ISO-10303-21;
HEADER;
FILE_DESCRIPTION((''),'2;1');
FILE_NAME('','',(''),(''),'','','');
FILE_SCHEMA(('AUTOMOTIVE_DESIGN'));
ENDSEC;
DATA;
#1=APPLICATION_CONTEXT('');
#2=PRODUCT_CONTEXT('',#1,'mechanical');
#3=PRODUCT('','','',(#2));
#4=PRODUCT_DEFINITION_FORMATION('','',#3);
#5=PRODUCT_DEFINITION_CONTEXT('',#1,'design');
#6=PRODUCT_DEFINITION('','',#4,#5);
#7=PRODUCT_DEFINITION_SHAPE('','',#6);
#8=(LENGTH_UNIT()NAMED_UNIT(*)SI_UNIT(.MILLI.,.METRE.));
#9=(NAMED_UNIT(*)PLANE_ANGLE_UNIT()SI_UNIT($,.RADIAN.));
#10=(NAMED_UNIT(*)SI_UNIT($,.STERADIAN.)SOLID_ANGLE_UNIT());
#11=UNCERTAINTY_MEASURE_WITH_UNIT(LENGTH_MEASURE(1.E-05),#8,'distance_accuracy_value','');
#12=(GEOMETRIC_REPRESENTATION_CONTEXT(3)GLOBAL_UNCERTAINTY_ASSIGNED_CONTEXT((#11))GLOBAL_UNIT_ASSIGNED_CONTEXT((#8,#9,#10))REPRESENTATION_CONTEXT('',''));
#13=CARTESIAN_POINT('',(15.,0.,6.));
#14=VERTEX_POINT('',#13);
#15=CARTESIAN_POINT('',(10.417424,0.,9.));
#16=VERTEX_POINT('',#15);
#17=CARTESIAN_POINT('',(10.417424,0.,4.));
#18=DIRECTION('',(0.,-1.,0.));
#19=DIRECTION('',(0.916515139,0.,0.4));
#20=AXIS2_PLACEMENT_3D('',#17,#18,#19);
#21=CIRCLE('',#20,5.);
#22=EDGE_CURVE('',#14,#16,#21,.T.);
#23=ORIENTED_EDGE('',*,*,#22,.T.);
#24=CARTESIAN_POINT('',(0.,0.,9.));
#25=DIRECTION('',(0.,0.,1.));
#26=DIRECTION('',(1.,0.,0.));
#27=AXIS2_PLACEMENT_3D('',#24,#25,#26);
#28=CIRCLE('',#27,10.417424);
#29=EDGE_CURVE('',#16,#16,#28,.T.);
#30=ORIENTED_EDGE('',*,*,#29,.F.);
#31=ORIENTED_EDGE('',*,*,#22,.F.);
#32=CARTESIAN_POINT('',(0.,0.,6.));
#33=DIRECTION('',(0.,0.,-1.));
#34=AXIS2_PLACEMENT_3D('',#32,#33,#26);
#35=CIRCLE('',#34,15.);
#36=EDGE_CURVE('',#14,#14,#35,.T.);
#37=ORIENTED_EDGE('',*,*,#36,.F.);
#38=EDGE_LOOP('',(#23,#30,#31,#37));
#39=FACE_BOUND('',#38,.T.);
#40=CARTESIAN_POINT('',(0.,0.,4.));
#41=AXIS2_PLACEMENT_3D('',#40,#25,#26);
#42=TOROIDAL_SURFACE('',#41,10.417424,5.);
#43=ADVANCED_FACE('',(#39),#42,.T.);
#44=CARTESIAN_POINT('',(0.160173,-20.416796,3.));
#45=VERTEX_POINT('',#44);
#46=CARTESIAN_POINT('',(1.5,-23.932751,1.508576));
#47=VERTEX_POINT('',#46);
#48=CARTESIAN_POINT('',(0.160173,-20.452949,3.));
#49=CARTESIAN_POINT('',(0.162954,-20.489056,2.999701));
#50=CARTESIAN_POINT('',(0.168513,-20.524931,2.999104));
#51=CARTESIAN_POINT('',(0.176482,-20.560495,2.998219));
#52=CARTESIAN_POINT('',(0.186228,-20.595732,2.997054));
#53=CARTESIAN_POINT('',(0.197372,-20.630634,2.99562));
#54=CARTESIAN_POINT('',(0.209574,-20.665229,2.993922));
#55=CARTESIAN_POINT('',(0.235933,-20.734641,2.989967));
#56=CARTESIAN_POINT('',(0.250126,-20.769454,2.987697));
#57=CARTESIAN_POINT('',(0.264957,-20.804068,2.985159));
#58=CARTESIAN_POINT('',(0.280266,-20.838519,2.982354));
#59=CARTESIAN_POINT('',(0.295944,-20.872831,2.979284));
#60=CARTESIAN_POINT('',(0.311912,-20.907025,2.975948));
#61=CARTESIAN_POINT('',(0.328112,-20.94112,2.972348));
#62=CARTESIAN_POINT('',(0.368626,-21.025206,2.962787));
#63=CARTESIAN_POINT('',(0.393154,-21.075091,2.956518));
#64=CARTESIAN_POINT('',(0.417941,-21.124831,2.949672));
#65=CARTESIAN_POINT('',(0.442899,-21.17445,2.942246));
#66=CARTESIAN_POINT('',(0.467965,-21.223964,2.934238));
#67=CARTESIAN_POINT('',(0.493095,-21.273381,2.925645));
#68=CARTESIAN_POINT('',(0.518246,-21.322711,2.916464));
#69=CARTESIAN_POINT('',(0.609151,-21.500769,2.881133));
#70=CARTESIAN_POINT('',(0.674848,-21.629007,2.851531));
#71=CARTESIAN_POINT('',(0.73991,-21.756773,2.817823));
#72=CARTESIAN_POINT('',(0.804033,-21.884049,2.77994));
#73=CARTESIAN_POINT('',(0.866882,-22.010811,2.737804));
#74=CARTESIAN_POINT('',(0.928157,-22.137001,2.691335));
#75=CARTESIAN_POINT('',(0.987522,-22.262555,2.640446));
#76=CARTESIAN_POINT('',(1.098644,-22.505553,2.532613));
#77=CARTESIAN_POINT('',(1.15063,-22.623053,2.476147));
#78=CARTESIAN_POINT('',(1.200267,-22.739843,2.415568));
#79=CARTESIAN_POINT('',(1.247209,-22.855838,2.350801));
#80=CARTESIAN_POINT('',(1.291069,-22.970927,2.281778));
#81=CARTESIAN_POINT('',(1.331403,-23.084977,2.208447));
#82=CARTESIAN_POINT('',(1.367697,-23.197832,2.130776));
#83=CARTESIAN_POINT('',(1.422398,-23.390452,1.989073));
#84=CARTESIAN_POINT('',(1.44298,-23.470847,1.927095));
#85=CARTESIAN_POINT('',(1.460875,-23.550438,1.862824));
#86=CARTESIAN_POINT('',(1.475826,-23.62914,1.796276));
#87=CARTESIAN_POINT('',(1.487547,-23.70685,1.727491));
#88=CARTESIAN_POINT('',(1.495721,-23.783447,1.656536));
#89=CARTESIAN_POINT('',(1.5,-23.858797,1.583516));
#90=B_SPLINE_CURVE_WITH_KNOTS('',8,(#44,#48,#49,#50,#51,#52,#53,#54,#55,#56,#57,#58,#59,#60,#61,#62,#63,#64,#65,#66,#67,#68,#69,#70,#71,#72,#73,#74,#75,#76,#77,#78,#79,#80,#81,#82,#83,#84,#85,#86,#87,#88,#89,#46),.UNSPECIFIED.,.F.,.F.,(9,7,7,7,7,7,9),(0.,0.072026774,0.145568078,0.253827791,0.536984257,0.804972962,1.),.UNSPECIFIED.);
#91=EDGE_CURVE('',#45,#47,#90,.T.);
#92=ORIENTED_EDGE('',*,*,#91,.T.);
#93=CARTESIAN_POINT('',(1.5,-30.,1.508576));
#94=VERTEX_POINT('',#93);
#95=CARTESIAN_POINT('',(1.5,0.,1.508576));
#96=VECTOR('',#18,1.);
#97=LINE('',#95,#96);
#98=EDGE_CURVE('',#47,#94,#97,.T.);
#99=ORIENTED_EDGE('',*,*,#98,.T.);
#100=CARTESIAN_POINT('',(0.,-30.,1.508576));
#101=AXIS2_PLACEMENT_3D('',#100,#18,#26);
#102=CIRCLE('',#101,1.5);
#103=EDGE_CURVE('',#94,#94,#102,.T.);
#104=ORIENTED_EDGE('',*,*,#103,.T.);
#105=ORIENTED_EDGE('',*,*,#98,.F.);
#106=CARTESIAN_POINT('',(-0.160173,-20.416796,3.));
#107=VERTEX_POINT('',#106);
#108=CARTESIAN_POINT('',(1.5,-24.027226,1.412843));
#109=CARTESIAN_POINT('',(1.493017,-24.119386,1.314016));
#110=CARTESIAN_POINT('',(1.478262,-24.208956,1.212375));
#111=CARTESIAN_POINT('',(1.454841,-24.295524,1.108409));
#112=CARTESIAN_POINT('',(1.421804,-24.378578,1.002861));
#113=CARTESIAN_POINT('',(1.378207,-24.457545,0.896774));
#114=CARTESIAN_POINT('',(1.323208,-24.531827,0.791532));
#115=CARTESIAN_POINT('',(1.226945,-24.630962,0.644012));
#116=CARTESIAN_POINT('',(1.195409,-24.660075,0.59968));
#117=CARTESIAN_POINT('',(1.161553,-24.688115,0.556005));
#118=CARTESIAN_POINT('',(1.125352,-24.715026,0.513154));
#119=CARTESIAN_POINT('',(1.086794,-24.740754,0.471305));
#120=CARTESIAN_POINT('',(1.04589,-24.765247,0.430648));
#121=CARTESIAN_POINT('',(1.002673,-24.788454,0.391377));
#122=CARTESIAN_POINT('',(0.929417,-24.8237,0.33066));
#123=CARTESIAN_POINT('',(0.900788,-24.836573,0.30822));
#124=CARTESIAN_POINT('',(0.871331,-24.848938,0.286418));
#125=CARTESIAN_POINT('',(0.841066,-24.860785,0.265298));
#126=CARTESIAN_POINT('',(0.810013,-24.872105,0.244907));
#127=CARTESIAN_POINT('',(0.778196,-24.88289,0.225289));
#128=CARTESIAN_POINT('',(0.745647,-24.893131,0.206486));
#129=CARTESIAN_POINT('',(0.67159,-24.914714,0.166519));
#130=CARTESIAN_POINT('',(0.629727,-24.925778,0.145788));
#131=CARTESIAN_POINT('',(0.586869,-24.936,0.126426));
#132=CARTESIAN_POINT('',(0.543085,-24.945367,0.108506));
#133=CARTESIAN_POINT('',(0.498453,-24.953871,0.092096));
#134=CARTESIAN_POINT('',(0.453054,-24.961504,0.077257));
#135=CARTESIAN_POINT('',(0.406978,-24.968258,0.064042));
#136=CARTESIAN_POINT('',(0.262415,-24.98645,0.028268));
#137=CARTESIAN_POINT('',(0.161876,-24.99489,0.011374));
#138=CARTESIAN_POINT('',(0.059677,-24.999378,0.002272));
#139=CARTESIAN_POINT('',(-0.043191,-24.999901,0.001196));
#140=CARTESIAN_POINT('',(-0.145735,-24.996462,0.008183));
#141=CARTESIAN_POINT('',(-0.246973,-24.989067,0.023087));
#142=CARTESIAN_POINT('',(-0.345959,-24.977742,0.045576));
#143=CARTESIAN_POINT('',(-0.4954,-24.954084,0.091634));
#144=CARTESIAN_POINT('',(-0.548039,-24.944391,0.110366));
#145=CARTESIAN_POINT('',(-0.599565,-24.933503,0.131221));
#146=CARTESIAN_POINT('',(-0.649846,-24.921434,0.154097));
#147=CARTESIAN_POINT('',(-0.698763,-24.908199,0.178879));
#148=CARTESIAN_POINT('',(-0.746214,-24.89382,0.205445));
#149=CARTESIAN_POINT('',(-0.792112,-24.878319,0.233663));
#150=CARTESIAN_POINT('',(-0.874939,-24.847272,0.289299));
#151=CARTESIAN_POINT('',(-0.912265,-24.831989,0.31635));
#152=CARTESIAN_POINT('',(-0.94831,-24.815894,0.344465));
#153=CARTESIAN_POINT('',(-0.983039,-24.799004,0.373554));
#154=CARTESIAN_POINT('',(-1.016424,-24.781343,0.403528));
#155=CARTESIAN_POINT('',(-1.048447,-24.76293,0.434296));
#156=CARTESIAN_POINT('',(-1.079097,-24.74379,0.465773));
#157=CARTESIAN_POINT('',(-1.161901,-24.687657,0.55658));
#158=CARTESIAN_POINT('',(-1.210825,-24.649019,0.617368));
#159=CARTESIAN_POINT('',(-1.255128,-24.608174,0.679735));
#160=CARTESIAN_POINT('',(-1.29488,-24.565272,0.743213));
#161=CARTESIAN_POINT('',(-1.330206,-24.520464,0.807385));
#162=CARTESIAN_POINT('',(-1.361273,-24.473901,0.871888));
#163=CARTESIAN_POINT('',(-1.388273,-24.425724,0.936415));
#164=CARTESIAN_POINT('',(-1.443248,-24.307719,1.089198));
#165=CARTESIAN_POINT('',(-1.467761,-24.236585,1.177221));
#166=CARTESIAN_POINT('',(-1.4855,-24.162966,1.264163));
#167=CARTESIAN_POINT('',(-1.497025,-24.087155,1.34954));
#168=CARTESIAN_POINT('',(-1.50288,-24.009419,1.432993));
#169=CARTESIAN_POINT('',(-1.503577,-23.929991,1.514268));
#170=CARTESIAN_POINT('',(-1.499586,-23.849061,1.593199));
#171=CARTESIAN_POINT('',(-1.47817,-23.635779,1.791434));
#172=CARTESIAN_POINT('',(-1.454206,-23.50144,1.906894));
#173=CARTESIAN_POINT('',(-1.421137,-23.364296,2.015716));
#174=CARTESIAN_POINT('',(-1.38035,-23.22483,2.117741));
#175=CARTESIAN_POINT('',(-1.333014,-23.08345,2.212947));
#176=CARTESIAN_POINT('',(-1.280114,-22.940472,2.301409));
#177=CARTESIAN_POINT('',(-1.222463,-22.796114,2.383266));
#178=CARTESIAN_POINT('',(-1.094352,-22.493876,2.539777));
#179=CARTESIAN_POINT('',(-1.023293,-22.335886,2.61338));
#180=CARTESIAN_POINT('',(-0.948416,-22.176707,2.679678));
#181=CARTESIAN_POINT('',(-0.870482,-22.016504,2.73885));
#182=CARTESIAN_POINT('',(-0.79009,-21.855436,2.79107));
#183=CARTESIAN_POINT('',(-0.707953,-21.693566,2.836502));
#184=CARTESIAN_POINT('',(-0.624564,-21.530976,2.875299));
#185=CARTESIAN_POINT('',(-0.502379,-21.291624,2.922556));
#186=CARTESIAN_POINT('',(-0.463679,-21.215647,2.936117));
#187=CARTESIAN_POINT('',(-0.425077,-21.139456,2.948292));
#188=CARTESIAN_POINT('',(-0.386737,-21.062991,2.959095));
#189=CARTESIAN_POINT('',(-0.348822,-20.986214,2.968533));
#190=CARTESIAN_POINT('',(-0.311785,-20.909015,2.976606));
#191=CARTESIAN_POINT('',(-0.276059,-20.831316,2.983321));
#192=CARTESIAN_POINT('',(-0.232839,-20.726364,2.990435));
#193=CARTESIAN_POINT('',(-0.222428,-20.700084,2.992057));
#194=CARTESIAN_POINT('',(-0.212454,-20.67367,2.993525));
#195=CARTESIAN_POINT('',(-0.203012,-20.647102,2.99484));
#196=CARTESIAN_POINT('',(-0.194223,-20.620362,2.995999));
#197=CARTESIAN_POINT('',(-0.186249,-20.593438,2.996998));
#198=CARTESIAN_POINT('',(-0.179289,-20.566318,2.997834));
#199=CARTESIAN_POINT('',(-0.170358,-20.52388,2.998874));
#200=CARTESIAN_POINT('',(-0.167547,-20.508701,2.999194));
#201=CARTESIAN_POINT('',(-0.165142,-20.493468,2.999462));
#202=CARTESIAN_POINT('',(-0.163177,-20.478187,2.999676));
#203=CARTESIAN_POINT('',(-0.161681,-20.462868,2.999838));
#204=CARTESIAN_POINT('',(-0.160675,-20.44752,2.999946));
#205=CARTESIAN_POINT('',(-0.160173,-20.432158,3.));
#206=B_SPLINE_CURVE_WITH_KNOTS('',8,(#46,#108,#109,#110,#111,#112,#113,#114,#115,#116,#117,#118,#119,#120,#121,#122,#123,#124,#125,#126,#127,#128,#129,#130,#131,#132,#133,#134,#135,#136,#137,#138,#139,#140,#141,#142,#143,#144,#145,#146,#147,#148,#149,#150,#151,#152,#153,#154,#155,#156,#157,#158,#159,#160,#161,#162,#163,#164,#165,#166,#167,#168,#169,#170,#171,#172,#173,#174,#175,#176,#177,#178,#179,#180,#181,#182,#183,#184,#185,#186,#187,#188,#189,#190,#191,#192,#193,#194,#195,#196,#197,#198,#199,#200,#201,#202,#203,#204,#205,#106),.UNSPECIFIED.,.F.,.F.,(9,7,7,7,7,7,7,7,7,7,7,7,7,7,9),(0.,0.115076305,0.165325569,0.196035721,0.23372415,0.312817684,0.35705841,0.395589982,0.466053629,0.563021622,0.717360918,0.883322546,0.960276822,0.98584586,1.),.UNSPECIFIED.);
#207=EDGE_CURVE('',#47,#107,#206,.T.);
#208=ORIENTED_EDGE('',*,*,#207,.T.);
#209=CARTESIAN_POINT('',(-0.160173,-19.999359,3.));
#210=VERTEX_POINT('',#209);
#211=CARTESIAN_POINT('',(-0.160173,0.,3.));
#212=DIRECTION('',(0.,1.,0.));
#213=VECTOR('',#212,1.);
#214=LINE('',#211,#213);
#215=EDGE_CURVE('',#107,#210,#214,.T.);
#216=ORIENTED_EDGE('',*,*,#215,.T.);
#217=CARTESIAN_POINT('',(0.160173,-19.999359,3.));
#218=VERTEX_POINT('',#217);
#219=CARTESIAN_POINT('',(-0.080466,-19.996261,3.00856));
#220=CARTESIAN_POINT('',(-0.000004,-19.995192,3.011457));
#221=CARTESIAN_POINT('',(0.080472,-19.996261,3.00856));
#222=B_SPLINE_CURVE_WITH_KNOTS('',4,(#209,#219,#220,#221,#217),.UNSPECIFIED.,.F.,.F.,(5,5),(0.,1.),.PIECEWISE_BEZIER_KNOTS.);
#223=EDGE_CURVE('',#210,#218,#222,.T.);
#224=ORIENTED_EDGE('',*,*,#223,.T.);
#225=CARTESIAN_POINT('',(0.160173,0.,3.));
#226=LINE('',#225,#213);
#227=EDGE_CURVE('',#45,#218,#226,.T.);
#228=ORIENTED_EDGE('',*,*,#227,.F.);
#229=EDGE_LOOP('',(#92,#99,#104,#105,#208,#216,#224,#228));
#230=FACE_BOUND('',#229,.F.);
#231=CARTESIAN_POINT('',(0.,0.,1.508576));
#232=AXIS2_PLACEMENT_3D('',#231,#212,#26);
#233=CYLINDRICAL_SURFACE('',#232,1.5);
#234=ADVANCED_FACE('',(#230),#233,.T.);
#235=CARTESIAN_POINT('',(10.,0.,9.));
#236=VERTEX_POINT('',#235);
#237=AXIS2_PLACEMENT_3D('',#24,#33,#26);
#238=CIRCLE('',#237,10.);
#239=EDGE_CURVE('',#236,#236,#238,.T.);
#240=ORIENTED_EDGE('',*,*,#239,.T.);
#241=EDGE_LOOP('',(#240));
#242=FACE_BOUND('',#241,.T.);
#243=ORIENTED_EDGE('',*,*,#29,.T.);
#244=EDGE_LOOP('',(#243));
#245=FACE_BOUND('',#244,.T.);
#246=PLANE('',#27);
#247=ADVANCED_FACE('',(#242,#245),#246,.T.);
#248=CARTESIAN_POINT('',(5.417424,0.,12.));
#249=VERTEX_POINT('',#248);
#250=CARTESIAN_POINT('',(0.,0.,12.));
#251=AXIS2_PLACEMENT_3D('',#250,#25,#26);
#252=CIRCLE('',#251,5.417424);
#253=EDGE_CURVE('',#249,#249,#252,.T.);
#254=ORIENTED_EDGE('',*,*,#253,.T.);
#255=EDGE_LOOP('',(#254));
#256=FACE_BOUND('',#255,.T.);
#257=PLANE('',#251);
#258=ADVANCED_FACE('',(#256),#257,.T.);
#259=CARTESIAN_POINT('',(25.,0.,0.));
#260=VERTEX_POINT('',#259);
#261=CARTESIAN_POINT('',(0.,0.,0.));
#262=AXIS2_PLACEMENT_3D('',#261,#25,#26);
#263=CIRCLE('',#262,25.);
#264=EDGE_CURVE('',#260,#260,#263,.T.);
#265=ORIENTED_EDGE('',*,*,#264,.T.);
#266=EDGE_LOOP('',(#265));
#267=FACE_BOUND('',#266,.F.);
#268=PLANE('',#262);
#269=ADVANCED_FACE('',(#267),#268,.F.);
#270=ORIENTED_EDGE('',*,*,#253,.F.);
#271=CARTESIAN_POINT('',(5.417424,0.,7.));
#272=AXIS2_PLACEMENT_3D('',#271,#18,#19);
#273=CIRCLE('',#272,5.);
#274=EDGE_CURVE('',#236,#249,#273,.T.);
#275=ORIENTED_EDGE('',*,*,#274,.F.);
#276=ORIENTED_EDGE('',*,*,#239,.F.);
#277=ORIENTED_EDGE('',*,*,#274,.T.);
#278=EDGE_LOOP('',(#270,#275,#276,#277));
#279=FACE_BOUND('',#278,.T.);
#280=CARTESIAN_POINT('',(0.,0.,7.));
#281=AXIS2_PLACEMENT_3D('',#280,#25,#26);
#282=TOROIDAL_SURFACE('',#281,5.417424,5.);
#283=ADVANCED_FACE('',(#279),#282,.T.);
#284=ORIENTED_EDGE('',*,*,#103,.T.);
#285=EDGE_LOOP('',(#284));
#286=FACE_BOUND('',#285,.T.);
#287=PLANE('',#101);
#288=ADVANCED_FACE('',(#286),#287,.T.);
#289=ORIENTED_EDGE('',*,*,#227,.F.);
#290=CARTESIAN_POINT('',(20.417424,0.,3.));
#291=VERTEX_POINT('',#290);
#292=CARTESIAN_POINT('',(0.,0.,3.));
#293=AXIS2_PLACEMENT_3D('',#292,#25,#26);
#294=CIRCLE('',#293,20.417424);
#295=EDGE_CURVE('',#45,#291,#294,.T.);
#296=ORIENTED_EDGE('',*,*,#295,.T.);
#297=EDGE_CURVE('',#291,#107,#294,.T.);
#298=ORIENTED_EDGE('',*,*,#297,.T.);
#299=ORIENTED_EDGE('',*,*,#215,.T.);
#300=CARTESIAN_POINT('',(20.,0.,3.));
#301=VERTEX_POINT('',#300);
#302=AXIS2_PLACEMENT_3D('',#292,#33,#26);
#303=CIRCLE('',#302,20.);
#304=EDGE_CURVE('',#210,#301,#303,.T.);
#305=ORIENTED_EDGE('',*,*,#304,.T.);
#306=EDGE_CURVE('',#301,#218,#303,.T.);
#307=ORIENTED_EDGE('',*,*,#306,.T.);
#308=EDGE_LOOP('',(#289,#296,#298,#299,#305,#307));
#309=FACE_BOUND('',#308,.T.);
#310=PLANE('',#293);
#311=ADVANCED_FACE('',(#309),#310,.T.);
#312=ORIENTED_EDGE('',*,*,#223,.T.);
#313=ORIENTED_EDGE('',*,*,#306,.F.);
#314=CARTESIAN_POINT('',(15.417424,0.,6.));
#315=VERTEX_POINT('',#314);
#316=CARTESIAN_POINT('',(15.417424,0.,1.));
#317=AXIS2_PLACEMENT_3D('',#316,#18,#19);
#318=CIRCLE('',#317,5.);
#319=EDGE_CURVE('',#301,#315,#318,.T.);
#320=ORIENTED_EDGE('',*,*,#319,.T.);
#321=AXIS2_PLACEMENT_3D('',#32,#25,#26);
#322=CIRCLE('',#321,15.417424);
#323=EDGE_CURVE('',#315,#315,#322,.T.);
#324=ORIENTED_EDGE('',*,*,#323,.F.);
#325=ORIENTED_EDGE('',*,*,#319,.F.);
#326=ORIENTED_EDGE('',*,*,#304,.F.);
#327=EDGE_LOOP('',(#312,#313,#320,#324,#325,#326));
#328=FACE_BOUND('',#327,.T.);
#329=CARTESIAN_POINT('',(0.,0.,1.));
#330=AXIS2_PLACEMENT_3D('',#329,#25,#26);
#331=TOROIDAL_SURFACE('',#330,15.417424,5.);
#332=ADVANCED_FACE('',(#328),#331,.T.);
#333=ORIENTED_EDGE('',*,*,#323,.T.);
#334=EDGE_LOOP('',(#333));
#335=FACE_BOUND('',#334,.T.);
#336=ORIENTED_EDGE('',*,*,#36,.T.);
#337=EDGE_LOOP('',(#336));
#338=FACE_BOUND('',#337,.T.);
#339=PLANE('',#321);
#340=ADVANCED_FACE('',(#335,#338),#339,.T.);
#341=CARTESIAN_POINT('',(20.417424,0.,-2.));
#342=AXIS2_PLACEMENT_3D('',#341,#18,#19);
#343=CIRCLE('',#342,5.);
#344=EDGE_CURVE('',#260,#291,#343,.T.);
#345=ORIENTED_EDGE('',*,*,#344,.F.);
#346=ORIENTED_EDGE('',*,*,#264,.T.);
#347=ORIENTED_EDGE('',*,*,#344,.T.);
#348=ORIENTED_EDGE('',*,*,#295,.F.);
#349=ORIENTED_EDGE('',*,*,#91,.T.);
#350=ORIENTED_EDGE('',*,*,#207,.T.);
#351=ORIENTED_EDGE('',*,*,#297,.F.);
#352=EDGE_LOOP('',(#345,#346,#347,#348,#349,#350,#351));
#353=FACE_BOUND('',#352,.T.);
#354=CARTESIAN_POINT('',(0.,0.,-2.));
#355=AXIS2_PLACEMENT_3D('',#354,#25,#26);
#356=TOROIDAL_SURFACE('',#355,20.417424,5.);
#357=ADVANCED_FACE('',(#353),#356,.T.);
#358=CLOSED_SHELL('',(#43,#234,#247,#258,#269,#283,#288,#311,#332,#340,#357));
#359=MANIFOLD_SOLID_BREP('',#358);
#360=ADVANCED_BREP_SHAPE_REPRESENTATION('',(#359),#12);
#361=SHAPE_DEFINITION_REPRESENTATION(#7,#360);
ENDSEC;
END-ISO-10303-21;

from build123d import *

# Parameters (mm, degrees)
F0_R      = 25
F2_DEPTH  = 3
F1_R      = 20
F3_DEPTH  = 6
F4_R      = 15
F5_DEPTH  = 9
F6_R      = 10
F7_DEPTH  = 12
F12_R     = 1.5
F13_DEPTH = 30


# Not quite as in the source:
# - a fillet or chamfer that OpenCascade refuses, or shapes differently, is made with other operations: its cross-section is extruded or revolved along the edge and cut away or added


with BuildPart() as f2:
    # F0 (on Top) → F2 (new body)
    with BuildSketch(Plane.XY):
        Circle(F0_R)
    extrude(amount=F2_DEPTH)

    # F1 (on Top) → F3 (join)
    with BuildSketch(Plane.XY):
        Circle(F1_R)
    extrude(amount=F3_DEPTH)

    # F4 (on Top) → F5 (join)
    with BuildSketch(Plane.XY):
        Circle(F4_R)
    extrude(amount=F5_DEPTH)

    # F6 (on Top) → F7 (join)
    with BuildSketch(Plane.XY):
        Circle(F6_R)
    extrude(amount=F7_DEPTH)

    # F8: fillet of radius 5 on 1 edges, made by hand

    # F8_s1 → F8_t2 (revolve, cut)
    with BuildSketch(Plane.XZ):
        with BuildLine():
            ThreePointArc((10, 9), (8.1560370926, 11.1833001327), (5.417424305, 12))
            Line((5.417424305, 12), (10, 12))
            Line((10, 12), (10, 9))
        make_face()
    revolve(axis=Axis((0, 0, 12), (0, 0, 1)), mode=Mode.SUBTRACT)

    # F9: fillet of radius 5 on 1 edges, made by hand

    # F9_s1 → F9_t2 (revolve, cut)
    with BuildSketch(Plane.XZ):
        with BuildLine():
            ThreePointArc((15, 6), (13.1560370926, 8.1833001327), (10.417424305, 9))
            Line((10.417424305, 9), (15, 9))
            Line((15, 9), (15, 6))
        make_face()
    revolve(axis=Axis((0, 0, 9), (0, 0, 1)), mode=Mode.SUBTRACT)

    # F10: fillet of radius 5 on 1 edges, made by hand

    # F10_s1 → F10_t2 (revolve, cut)
    with BuildSketch(Plane.XZ):
        with BuildLine():
            ThreePointArc((20, 3), (18.1560370926, 5.1833001327), (15.417424305, 6))
            Line((15.417424305, 6), (20, 6))
            Line((20, 6), (20, 3))
        make_face()
    revolve(axis=Axis((0, 0, 6), (0, 0, 1)), mode=Mode.SUBTRACT)

    # F11: fillet of radius 5 on 1 edges, made by hand

    # F11_s1 → F11_t2 (revolve, cut)
    with BuildSketch(Plane.XZ):
        with BuildLine():
            ThreePointArc((25, 0), (23.1560370926, 2.1833001327), (20.417424305, 3))
            Line((20.417424305, 3), (25, 3))
            Line((25, 3), (25, 0))
        make_face()
    revolve(axis=Axis((0, 0, 3), (0, 0, 1)), mode=Mode.SUBTRACT)

    # F12 (on Front) → F13 (join)
    with BuildSketch(Plane.XZ):
        with Locations((0, 1.508576342)):
            Circle(F12_R)
    extrude(amount=F13_DEPTH)


solid = f2.part
